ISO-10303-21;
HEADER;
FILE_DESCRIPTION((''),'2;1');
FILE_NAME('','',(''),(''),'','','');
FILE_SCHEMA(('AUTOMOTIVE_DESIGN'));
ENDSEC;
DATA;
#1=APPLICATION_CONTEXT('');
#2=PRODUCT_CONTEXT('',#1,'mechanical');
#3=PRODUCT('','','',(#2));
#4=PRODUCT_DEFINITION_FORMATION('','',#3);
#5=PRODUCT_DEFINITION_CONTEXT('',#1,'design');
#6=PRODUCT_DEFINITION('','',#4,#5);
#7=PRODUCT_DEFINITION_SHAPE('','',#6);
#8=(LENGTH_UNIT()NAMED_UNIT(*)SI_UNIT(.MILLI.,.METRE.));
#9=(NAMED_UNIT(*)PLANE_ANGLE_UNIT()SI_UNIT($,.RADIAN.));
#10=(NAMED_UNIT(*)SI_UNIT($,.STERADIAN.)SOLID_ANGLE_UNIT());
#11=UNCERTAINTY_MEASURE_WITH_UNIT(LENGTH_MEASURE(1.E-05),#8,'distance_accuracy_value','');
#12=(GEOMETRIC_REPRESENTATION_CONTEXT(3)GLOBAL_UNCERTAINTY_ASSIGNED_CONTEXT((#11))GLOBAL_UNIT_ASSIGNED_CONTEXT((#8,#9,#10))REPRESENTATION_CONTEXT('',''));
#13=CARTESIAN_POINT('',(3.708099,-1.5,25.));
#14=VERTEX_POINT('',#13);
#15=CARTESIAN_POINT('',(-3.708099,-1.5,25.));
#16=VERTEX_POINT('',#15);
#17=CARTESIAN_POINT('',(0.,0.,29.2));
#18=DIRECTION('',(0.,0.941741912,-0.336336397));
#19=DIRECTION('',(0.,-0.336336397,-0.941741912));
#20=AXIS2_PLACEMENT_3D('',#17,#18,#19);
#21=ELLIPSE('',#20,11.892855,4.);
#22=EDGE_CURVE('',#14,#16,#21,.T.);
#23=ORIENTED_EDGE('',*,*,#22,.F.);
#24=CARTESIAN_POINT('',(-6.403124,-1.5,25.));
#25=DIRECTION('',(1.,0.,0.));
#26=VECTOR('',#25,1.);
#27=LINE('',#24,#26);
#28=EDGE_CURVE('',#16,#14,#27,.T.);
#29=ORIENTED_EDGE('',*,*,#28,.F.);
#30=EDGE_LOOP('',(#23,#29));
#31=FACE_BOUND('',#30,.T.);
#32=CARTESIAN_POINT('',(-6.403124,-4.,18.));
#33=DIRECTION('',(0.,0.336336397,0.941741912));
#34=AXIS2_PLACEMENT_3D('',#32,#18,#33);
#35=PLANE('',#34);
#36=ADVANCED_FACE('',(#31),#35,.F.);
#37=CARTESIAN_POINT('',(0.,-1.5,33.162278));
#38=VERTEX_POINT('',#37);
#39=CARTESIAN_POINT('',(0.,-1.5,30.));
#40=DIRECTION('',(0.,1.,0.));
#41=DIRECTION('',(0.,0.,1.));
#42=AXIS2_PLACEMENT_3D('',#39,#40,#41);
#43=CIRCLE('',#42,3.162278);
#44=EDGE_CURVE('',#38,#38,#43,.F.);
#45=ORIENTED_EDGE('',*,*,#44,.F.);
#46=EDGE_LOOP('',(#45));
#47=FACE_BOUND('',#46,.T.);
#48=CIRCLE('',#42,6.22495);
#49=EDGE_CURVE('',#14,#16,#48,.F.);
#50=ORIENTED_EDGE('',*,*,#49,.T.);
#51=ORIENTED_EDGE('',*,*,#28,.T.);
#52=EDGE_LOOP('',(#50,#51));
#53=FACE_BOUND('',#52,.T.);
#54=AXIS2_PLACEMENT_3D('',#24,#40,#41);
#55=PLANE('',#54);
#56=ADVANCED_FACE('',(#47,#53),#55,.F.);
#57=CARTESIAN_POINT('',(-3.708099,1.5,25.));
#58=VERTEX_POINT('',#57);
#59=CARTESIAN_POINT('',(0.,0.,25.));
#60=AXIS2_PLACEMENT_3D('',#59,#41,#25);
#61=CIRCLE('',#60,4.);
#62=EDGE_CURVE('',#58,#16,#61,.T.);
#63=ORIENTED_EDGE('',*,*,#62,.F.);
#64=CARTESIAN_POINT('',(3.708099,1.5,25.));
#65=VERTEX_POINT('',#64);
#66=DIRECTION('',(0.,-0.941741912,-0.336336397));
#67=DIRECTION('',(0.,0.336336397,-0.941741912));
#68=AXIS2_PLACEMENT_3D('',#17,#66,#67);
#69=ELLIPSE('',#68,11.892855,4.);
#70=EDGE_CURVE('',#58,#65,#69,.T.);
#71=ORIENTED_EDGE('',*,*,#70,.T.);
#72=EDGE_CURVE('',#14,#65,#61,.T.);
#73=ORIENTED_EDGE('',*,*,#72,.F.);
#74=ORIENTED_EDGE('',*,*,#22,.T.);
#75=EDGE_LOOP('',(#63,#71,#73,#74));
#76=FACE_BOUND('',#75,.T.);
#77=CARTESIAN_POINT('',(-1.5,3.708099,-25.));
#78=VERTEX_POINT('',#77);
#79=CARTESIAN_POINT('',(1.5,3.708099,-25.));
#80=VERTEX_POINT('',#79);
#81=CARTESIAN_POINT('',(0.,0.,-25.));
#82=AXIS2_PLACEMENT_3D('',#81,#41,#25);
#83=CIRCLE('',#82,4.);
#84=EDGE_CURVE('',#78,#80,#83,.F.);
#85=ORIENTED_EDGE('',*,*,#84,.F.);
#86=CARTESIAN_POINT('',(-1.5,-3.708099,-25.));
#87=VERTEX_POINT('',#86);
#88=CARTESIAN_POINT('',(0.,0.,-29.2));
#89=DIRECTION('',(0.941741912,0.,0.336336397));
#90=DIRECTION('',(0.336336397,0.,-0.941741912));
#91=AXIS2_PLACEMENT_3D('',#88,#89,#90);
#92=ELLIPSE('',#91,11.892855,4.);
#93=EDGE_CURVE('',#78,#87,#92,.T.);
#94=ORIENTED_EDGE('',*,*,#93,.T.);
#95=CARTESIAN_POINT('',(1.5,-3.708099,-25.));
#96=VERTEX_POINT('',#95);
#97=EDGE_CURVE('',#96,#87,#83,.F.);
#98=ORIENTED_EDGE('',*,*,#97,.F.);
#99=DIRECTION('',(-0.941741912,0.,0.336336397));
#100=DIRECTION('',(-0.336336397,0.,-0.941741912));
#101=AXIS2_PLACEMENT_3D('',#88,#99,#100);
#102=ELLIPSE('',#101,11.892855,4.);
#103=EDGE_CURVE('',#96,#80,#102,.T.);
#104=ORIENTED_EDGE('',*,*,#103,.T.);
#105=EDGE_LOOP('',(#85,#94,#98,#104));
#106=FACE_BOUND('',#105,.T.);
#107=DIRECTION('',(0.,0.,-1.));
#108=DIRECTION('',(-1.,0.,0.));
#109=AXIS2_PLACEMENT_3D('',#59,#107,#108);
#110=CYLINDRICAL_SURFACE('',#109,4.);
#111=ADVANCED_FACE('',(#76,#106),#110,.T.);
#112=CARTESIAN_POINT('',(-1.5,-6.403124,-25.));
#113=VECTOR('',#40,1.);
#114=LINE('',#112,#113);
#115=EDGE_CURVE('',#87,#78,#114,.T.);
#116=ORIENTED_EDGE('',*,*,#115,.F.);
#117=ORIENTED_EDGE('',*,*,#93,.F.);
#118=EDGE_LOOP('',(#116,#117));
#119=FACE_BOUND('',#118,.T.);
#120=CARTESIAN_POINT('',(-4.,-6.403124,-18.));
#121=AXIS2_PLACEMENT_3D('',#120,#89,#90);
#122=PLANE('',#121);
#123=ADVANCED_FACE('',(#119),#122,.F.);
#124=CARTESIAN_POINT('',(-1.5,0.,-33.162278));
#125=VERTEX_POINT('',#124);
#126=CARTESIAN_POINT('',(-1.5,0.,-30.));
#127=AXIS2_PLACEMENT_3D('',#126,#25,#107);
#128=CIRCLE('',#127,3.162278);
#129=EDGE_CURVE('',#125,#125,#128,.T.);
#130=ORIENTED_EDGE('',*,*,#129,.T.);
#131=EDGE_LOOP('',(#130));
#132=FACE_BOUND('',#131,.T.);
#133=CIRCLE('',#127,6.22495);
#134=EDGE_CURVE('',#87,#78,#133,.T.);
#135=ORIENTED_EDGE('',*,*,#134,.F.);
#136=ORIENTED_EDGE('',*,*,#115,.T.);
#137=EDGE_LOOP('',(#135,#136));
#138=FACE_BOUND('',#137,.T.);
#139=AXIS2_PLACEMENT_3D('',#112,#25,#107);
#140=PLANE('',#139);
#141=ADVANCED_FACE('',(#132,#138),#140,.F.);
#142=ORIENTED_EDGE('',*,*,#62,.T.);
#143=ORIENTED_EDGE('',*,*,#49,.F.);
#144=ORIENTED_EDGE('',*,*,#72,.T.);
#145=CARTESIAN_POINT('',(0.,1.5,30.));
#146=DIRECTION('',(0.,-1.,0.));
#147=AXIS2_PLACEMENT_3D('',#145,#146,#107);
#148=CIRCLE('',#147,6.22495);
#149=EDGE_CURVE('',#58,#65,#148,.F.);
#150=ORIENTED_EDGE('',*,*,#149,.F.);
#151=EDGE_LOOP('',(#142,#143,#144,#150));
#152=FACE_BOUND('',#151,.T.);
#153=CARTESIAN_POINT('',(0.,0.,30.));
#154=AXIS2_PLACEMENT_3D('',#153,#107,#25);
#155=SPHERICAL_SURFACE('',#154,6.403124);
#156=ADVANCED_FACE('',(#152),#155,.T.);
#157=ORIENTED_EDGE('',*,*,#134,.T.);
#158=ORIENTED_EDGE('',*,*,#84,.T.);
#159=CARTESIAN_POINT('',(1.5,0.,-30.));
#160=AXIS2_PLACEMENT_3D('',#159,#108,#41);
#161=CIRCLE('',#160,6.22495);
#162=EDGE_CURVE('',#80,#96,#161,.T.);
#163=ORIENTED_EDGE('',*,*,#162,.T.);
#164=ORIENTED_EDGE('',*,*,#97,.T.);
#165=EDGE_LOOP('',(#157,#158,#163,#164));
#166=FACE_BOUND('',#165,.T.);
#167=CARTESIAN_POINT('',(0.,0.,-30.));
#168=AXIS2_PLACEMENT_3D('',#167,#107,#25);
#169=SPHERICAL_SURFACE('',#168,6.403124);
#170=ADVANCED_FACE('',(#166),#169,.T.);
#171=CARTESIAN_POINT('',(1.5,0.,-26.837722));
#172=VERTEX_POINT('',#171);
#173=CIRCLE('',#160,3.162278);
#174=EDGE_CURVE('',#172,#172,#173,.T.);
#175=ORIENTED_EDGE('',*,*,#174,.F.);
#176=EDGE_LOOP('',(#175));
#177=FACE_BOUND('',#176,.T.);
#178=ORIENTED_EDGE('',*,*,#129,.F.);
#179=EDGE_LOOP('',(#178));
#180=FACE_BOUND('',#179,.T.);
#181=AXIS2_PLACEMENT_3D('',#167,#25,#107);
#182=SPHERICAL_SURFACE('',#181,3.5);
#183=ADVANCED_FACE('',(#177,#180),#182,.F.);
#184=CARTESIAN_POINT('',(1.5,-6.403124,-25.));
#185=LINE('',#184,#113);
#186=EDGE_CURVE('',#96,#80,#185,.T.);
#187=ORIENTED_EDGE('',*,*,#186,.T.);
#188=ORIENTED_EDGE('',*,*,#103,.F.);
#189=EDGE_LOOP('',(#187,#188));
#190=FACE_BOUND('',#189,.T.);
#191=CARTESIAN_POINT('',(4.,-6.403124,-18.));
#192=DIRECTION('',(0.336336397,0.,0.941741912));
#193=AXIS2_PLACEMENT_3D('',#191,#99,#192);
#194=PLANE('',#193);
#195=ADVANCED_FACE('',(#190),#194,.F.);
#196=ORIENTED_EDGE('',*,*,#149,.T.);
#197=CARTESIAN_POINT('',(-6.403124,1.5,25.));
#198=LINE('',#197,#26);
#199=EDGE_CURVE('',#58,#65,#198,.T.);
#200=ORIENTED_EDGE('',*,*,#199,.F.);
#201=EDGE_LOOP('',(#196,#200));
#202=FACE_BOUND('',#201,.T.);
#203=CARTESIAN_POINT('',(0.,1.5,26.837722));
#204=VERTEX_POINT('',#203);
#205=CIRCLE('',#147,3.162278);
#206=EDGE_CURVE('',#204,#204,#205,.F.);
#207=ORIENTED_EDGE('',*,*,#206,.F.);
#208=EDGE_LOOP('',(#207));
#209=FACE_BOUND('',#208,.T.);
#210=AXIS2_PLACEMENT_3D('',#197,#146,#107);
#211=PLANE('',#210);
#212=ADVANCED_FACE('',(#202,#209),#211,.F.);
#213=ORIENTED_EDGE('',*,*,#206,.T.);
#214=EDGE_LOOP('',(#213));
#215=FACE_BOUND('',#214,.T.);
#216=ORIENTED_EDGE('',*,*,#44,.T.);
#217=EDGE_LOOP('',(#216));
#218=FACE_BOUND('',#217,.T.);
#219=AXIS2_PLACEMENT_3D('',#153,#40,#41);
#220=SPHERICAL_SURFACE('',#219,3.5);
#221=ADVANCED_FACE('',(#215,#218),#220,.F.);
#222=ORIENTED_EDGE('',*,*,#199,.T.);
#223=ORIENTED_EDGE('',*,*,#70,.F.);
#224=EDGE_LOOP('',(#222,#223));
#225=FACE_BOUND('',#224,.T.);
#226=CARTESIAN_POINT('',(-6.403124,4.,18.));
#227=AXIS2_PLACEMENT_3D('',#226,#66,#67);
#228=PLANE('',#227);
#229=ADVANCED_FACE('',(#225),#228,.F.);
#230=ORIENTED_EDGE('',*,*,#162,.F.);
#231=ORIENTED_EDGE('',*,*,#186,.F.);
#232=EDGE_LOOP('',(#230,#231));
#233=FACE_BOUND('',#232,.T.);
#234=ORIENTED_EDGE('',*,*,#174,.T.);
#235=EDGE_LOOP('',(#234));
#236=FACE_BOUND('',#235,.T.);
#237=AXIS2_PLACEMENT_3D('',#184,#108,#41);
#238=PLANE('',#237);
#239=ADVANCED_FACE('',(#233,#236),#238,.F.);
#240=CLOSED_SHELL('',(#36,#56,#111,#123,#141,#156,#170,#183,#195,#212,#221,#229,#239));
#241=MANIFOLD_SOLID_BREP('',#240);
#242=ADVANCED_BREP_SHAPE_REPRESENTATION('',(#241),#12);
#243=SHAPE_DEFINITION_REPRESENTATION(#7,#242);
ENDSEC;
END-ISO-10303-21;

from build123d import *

# Parameters (mm, degrees)
SKETCH_1_R               = 4
EXTRUDE_1_DEPTH          = 25
CUT_EXTRUDE_1_DEPTH      = 38.512497308
CUT_EXTRUDE_1_DEPTH_BACK = 38.512497308
CUT_EXTRUDE_2_DEPTH      = 38.512497308
CUT_EXTRUDE_2_DEPTH_BACK = 38.512497308


with BuildPart() as part:
    # 草图1 → 凸台-拉伸1 (new, symmetric)
    with BuildSketch(Plane.XY):
        Circle(SKETCH_1_R)
    extrude(amount=EXTRUDE_1_DEPTH, both=True)

    # 草图2 → 旋转2 (revolve)
    with BuildSketch(Plane(origin=(0, 0, 0), x_dir=(1, 0, 0), z_dir=(0, 1, 0))):
        with BuildLine():
            ThreePointArc((0, 23.596875763), (6.403124237, 30), (0, 36.403124237))
            Line((0, 36.403124237), (0, 33.5))
            ThreePointArc((0, 33.5), (3.5, 30), (0, 26.5))
            Line((0, 26.5), (0, 23.596875763))
        make_face()
        with BuildLine():
            Line((0, -33.5), (0, -36.403124237))
            ThreePointArc((0, -36.403124237), (6.403124237, -30), (0, -23.596875763))
            Line((0, -23.596875763), (0, -26.5))
            ThreePointArc((0, -26.5), (3.5, -30), (0, -33.5))
        make_face()
    revolve(axis=Axis((0, 0, -36.403124237), (0, 0, 1)))

    # 草图3 → 切除-拉伸1 (cut, two sides: drawn at the far end of the back side and taken through both)
    with BuildSketch(Plane(origin=(0, 0, 0), x_dir=(0, 0, -1), z_dir=(1, 0, 0)).offset(-CUT_EXTRUDE_1_DEPTH_BACK)):
        Polygon((-18, 4), (-25, 1.5), (-38, 1.5), (-38, 8), (-18, 8), align=None)
        Polygon((-18, -8), (-18, -4), (-25, -1.5), (-38, -1.5), (-38, -8), align=None)
    extrude(amount=CUT_EXTRUDE_1_DEPTH + CUT_EXTRUDE_1_DEPTH_BACK, mode=Mode.SUBTRACT)

    # 草图4 → 切除-拉伸2 (cut, two sides: drawn at the far end of the back side and taken through both)
    with BuildSketch(Plane(origin=(0, 0, 0), x_dir=(1, 0, 0), z_dir=(0, 1, 0)).offset(-CUT_EXTRUDE_2_DEPTH_BACK)):
        Polygon((4, 18), (1.5, 25), (1.5, 39), (8, 39), (8, 18), align=None)
        Polygon((-8, 18), (-4, 18), (-1.5, 25), (-1.5, 39), (-8, 39), align=None)
    extrude(amount=CUT_EXTRUDE_2_DEPTH + CUT_EXTRUDE_2_DEPTH_BACK, mode=Mode.SUBTRACT)


solid = part.part
